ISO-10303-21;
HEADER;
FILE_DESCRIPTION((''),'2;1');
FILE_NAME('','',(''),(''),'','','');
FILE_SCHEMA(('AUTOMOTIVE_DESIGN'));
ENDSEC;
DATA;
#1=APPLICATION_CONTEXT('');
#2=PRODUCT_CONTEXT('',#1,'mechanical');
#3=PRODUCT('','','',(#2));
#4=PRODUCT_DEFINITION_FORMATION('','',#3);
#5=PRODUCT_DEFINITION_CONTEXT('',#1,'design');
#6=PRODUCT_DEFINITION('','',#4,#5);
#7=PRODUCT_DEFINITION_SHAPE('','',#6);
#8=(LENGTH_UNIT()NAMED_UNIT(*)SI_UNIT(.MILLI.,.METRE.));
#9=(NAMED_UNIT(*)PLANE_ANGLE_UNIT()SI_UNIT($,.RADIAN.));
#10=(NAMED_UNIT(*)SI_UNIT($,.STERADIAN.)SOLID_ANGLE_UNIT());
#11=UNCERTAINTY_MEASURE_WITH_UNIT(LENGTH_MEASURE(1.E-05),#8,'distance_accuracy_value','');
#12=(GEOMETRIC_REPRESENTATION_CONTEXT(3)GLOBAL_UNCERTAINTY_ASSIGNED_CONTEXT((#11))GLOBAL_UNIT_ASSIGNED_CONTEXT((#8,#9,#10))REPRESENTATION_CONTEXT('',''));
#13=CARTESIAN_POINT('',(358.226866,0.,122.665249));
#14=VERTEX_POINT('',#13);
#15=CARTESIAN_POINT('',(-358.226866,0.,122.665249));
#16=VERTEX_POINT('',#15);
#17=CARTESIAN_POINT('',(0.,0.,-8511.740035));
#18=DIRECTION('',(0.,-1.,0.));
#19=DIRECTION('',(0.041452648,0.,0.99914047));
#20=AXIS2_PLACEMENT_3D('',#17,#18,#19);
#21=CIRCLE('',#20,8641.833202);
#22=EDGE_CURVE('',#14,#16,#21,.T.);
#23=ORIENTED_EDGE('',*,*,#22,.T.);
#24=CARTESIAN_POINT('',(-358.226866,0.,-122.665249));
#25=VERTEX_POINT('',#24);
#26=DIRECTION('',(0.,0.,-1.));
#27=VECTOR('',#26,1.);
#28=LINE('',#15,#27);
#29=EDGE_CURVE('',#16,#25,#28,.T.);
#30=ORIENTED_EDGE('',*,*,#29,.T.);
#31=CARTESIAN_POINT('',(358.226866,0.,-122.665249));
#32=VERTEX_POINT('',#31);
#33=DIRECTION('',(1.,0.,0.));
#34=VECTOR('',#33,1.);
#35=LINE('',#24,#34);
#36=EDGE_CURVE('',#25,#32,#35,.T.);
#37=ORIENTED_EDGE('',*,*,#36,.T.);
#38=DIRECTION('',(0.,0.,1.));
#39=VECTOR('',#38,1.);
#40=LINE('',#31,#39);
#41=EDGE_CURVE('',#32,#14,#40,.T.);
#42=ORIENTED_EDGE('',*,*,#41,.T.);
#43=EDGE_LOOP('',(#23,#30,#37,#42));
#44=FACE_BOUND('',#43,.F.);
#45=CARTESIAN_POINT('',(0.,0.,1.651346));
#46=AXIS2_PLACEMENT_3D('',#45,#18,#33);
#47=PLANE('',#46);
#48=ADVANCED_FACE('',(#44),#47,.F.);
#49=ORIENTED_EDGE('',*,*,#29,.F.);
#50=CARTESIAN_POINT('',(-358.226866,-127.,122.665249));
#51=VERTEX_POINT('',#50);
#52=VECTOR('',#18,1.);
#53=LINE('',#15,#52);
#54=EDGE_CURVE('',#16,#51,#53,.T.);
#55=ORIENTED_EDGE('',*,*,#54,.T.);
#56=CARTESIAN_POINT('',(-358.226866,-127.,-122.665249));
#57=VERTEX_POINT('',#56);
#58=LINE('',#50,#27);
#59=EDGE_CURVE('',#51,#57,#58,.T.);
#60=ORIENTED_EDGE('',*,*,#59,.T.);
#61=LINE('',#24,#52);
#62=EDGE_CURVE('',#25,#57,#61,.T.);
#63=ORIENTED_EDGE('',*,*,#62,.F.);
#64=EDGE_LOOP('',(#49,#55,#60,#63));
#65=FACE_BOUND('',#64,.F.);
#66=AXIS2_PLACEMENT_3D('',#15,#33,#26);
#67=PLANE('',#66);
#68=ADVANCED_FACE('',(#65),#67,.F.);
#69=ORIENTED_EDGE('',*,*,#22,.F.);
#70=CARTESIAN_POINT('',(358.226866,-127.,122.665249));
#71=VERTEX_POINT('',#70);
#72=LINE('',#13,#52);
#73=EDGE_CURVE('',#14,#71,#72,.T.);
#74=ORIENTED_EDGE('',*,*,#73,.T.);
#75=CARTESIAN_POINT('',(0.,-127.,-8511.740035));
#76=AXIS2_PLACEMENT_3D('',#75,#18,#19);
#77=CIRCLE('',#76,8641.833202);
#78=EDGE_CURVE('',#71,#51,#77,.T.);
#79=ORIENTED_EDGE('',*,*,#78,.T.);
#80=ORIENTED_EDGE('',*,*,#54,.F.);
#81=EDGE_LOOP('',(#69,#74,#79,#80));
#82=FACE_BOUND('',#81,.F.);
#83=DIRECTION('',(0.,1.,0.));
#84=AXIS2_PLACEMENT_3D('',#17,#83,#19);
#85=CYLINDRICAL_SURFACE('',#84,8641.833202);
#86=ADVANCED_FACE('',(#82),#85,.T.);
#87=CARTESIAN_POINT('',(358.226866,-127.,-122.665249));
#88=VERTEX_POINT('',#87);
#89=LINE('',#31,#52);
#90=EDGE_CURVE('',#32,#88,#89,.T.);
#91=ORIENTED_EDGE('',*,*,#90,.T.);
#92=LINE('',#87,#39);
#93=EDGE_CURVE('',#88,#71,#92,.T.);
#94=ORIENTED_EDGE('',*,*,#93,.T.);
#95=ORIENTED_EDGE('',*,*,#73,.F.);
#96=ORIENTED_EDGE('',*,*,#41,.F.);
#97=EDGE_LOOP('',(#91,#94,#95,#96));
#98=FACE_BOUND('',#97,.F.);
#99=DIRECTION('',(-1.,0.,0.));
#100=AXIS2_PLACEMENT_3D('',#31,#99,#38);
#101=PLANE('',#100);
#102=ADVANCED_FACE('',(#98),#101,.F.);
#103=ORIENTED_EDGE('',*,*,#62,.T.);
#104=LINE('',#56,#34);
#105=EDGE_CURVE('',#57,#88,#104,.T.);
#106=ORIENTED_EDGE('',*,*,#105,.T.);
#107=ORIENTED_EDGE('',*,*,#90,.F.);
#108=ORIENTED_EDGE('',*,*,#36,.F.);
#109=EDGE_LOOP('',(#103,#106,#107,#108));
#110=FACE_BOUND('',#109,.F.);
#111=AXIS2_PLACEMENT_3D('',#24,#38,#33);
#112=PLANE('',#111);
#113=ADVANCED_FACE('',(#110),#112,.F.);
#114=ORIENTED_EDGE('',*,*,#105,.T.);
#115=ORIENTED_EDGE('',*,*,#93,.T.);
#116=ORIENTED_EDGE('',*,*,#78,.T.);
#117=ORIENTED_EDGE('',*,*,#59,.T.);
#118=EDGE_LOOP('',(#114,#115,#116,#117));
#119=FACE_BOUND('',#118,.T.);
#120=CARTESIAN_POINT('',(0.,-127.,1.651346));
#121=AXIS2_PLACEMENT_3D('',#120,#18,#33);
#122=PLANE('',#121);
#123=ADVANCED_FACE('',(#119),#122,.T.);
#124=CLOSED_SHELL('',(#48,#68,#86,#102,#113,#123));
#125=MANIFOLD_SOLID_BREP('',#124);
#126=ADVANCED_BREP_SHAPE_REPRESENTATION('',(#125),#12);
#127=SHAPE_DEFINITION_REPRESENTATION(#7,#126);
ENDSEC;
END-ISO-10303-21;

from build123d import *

# Parameters (mm, degrees)
F1_DEPTH = 127


# Not quite as in the source:
# - a feature names something its author has since deleted; it is built from what else it names


with BuildPart() as f1:
    # F0 (on Front) → F1 (new body)
    with BuildSketch(Plane.XZ):
        with BuildLine():
            Line((-358.22686553, 122.6652488112), (-358.22686553, -122.6652488112))
            Line((-358.22686553, -122.6652488112), (358.22686553, -122.6652488112))
            Line((358.22686553, -122.6652488112), (358.22686553, 122.6652488112))
            ThreePointArc((358.22686553, 122.6652488112), (0, 130.0931670637), (-358.22686553, 122.6652488112))
        make_face()
    extrude(amount=F1_DEPTH)


solid = f1.part
